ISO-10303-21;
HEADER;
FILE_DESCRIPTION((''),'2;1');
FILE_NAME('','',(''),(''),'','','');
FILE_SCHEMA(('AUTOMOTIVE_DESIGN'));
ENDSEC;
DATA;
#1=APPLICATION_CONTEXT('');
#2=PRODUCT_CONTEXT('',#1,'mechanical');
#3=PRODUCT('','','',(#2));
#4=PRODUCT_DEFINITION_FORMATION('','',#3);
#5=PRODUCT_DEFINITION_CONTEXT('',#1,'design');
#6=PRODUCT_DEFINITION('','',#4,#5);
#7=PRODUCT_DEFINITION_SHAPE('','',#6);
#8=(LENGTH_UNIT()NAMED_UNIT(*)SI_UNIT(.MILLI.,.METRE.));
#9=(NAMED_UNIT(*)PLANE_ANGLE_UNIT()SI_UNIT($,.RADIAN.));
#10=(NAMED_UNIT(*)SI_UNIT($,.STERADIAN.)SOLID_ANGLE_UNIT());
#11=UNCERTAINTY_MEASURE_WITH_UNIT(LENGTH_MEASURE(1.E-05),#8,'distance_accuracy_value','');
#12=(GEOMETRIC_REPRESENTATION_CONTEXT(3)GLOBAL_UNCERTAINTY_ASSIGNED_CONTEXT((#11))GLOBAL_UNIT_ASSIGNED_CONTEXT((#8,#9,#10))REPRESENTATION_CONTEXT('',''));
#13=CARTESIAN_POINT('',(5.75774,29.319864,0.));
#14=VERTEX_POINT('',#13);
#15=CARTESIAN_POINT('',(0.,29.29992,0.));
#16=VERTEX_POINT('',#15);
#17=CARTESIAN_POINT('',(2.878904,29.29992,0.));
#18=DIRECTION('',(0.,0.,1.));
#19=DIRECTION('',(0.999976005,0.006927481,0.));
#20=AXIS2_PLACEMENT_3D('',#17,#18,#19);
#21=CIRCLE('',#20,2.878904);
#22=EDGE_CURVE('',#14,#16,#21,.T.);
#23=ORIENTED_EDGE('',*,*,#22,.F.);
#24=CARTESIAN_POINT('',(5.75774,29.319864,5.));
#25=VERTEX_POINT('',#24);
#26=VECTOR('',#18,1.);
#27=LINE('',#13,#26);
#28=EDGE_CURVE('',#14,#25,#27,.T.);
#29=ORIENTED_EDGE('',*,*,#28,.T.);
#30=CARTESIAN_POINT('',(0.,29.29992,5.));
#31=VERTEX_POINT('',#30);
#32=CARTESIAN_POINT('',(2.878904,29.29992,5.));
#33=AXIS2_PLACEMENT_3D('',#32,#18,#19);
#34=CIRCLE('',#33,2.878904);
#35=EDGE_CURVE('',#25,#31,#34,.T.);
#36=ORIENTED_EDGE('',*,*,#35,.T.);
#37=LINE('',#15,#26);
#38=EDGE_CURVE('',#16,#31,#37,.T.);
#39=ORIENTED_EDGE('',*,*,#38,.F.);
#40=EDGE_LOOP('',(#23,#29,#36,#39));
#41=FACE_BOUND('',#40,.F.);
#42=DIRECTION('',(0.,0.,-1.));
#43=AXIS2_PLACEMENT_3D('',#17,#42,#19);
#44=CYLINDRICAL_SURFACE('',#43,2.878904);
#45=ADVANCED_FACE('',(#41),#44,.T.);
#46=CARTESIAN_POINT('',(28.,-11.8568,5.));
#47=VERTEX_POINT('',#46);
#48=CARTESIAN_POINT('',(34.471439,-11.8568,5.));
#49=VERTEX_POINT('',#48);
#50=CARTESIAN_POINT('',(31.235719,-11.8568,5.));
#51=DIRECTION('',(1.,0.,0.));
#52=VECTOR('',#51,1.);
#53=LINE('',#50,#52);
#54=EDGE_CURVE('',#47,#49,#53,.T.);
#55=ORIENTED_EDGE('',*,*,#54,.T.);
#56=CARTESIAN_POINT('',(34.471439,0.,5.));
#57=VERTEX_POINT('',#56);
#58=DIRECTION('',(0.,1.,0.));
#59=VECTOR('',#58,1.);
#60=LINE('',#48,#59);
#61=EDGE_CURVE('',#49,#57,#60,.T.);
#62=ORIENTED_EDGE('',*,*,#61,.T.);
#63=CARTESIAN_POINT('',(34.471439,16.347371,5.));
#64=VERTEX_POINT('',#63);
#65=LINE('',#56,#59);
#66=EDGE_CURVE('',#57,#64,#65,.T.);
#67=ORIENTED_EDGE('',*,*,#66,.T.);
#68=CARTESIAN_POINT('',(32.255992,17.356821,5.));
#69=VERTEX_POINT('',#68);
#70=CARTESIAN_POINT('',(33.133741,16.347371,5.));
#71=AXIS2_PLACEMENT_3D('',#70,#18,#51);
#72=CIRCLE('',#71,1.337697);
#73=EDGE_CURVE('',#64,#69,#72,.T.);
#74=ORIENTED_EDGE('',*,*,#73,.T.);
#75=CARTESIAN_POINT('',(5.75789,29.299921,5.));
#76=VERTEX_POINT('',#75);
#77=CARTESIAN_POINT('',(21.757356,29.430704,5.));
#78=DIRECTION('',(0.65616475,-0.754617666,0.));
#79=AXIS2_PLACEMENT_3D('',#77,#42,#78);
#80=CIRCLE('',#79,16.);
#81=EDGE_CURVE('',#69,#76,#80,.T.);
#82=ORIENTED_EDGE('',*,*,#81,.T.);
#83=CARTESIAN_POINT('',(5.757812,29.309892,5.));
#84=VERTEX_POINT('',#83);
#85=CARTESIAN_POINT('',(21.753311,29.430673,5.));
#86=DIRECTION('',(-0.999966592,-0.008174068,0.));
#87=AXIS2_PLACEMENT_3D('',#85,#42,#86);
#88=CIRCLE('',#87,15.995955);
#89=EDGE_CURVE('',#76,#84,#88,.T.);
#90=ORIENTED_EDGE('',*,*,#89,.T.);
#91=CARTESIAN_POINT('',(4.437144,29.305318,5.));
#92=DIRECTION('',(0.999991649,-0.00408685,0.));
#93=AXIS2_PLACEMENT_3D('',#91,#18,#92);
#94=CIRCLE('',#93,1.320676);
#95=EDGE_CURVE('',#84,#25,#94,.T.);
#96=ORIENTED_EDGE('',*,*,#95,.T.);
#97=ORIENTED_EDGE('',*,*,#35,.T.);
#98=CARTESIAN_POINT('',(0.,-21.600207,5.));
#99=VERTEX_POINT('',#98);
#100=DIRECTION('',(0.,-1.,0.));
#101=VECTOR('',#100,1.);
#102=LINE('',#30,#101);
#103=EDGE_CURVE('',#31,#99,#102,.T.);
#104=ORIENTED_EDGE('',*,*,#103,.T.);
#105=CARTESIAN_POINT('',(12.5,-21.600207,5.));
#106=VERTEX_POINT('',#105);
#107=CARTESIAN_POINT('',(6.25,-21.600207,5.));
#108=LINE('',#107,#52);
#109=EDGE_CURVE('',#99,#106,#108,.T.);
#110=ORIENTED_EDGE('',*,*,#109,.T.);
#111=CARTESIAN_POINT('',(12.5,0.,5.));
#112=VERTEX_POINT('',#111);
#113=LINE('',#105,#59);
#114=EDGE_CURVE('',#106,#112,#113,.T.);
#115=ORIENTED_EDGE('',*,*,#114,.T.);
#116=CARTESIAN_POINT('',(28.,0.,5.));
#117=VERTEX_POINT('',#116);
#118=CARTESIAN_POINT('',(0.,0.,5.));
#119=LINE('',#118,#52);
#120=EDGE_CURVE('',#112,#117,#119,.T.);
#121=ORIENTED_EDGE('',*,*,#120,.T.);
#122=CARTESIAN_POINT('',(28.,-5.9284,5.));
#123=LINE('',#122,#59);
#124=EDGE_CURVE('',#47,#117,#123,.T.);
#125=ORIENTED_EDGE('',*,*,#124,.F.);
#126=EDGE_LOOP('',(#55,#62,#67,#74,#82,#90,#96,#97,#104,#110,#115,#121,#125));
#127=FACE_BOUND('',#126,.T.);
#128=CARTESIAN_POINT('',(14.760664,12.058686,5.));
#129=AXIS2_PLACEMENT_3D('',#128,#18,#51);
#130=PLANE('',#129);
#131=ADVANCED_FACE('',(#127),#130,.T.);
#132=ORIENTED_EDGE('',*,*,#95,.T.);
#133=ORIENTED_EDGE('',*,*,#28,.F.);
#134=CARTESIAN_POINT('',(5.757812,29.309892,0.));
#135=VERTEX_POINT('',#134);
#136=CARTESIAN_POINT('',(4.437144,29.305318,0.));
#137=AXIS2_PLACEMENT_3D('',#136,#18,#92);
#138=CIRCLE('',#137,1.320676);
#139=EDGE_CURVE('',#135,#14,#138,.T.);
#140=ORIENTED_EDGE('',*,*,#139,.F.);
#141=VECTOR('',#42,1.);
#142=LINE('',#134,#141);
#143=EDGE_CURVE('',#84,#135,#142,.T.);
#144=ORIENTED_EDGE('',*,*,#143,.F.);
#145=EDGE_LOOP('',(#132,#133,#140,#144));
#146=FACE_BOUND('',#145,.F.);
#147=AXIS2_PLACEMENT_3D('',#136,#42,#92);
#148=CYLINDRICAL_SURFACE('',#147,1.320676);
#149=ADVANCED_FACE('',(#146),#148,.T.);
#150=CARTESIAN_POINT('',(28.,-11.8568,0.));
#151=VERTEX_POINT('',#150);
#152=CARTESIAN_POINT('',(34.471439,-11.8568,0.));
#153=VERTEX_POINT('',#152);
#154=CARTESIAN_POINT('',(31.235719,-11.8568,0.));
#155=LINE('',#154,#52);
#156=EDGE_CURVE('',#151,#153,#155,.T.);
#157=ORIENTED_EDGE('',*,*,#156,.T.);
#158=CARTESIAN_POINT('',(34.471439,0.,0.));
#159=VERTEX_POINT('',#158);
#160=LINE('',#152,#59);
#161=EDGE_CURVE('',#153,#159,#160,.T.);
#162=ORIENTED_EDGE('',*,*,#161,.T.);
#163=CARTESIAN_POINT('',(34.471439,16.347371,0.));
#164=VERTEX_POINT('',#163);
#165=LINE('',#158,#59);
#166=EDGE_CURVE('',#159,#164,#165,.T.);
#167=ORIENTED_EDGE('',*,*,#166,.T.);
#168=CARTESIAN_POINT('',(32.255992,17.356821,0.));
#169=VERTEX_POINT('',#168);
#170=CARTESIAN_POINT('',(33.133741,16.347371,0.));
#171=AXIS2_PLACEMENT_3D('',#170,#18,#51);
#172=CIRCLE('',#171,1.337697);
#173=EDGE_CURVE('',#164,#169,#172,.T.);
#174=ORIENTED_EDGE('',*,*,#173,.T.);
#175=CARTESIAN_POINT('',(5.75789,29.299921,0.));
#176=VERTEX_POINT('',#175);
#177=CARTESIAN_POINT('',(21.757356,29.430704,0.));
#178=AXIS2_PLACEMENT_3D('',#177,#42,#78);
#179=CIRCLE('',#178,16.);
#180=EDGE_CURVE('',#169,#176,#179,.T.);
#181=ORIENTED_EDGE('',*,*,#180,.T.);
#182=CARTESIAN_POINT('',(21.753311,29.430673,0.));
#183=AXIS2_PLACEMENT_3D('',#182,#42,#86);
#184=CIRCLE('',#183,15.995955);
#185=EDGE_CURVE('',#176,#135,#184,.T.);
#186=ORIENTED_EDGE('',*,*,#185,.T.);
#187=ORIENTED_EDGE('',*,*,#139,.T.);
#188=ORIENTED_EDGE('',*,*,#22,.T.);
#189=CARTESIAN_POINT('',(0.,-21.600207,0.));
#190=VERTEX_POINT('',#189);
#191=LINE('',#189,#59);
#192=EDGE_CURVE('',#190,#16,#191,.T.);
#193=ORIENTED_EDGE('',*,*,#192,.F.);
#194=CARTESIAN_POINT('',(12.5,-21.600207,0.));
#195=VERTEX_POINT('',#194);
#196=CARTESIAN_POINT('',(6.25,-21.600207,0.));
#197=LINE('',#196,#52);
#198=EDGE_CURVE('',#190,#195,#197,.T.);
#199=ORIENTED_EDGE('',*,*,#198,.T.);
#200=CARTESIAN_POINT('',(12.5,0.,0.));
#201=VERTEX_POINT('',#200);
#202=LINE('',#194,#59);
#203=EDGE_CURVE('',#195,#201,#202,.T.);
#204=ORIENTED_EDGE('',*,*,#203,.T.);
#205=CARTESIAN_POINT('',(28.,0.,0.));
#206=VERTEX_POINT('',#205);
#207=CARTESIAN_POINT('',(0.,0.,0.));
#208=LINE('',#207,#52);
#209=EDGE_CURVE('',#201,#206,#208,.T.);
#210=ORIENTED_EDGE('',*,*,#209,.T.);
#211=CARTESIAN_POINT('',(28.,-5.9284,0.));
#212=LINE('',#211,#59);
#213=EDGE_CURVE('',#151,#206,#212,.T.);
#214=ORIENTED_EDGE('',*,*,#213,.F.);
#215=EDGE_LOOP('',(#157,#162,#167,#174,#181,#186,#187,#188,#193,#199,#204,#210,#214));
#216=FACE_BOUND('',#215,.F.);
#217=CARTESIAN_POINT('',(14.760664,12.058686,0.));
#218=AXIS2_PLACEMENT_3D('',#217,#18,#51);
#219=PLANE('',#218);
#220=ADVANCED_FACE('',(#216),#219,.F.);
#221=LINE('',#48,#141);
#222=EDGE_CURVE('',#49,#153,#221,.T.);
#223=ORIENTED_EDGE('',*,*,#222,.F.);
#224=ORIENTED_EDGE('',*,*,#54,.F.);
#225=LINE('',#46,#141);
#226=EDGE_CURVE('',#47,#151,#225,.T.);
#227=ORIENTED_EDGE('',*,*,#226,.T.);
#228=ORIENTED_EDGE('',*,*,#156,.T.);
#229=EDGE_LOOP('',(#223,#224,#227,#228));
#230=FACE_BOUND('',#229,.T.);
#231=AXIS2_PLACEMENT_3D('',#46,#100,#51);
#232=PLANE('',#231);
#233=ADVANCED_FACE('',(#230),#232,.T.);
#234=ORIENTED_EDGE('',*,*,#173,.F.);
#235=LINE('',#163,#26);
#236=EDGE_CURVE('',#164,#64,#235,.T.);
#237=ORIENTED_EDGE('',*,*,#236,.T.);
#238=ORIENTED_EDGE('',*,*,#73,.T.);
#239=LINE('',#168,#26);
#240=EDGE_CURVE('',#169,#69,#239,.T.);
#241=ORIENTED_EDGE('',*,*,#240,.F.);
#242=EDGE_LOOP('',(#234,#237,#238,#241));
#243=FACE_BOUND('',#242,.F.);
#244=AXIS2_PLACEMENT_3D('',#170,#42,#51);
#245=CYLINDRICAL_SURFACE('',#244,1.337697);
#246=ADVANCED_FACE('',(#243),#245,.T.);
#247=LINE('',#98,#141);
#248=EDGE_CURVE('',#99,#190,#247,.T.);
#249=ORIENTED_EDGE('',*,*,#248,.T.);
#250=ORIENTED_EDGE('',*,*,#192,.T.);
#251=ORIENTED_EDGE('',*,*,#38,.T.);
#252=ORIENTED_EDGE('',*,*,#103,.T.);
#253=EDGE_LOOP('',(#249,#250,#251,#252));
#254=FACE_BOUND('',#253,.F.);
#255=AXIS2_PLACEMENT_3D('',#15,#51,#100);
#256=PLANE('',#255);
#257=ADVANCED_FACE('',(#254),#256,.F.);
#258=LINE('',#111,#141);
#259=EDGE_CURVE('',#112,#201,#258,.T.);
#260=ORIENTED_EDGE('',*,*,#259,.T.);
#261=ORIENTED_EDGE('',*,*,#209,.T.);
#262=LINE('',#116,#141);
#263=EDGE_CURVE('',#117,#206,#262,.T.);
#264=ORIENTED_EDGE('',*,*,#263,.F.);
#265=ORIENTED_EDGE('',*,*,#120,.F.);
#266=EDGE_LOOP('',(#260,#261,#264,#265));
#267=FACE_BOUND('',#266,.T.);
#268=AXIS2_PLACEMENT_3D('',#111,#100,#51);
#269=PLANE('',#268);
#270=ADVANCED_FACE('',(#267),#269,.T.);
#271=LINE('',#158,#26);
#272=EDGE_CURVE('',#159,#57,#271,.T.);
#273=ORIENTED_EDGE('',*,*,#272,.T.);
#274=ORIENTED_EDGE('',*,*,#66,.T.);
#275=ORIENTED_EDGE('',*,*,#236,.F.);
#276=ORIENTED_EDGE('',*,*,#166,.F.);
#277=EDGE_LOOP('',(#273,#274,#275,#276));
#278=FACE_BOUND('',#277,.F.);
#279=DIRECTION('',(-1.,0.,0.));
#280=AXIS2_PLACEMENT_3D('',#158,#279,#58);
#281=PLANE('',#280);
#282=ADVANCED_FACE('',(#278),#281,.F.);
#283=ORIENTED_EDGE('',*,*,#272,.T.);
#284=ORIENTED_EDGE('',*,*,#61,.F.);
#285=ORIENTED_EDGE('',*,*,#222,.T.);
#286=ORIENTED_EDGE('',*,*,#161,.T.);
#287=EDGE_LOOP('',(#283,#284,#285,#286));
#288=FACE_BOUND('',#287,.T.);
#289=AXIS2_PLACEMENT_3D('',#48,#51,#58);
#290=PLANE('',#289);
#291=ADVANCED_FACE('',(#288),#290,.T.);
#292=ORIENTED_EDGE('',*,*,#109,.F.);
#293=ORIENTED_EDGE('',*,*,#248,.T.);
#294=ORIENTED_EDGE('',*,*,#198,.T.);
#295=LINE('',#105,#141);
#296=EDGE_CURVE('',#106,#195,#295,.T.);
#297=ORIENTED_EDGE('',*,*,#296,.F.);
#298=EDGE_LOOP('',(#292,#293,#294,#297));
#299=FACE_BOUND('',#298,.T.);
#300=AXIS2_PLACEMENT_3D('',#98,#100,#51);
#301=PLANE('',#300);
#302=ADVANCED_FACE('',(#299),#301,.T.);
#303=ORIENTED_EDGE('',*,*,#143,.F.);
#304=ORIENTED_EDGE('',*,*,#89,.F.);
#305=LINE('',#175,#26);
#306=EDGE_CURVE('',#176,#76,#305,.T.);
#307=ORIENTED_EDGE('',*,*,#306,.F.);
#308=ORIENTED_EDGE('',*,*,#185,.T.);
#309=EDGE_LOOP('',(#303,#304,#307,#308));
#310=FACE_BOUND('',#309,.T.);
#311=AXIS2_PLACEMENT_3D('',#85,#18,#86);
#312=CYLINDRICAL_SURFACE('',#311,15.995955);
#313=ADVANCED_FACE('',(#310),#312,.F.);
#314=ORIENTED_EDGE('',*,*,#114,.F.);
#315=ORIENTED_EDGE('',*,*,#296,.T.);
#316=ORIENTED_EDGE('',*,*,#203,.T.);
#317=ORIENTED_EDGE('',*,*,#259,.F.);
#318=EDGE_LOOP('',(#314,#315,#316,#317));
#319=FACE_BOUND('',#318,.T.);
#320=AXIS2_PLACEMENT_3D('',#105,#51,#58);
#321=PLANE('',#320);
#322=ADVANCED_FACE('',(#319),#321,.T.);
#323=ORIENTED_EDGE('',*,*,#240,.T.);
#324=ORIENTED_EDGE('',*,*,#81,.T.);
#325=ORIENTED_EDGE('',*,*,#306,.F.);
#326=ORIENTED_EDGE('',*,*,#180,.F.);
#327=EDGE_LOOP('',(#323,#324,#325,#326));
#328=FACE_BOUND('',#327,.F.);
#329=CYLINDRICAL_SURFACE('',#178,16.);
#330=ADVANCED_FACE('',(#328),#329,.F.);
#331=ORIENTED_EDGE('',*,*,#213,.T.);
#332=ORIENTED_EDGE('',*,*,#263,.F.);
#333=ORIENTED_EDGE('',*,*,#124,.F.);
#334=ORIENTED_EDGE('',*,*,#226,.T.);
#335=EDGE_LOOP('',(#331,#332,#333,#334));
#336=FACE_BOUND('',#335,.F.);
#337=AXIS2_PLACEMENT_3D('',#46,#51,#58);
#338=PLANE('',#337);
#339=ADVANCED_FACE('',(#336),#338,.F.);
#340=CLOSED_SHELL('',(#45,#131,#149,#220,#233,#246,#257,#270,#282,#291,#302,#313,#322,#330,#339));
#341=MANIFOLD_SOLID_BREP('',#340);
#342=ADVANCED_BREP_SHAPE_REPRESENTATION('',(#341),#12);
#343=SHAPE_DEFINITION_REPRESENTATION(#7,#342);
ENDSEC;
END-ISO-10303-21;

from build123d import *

# Parameters (mm, degrees)
F1_DEPTH = 5
F2_W     = 6.4714387385
F2_H     = 11.8567999452
F2_W_2   = 12.5
F2_H_2   = 9.7434073687
F3_DEPTH = 5


# Not quite as in the source:
# - ends of sketch curves that miss each other by under 0.0002 mm in the source are joined
# - a feature names something its author has since deleted; it is built from what else it names


with BuildPart() as f1:
    # F0 (on Top) → F1 (new body)
    with BuildSketch(Plane.XY):
        with BuildLine():
            Line((0, 29.2999204248), (0, 0))
            Line((0, 0), (34.4714387385, 0))
            Line((34.4714387385, 0), (34.4714387385, 16.3473710418))
            ThreePointArc((34.4714387385, 16.3473710418), (32.5790927131, 15.1300794804), (32.2559916738, 17.3568210333))
            ThreePointArc((32.2559916738, 17.3568210333), (15.182844974, 14.8438668457), (5.7578901922, 29.2999210911))
            ThreePointArc((5.7578901922, 29.2999210911), (2.8789043427, 26.4210160822), (0, 29.2999204248))
        make_face()
        with BuildLine():
            ThreePointArc((5.7577396052, 29.3198639813), (2.8689325046, 32.1788074974), (0, 29.2999204248))
            ThreePointArc((0, 29.2999204248), (2.8789043427, 26.4210160822), (5.7578086853, 29.2999204248))
            ThreePointArc((5.7578086853, 29.2999204248), (5.7578117914, 29.3098925127), (5.7577396052, 29.3198639813))
        make_face()
        with BuildLine():
            ThreePointArc((32.2559916738, 17.3568210333), (32.5790927131, 15.1300794804), (34.4714387385, 16.3473710418))
            ThreePointArc((34.4714387385, 16.3473710418), (33.6883902233, 17.5646626032), (32.2559916738, 17.3568210333))
        make_face()
    extrude(amount=F1_DEPTH)

    # F2 (on face) → F3 (join)
    with BuildSketch(Plane.XY.offset(5)):
        with BuildLine():
            Line((28, 0), (34.4714387385, 0))
            Line((34.4714387385, 0), (34.4714387385, 16.3473710418))
            ThreePointArc((34.4714387385, 16.3473710418), (33.6883902233, 17.5646626032), (32.2559916738, 17.3568210333))
            ThreePointArc((32.2559916738, 17.3568210333), (15.182844974, 14.8438668457), (5.7578901922, 29.2999210911))
            ThreePointArc((5.7578901922, 29.2999210911), (5.757811792, 29.3098923335), (5.7577396052, 29.3198639813))
            ThreePointArc((5.7577396052, 29.3198639813), (2.8689325046, 32.1788074974), (0, 29.2999204248))
            Line((0, 29.2999204248), (0, 25.3991372883))
            Line((0, 25.3991372883), (0, 0))
            Line((0, 0), (12.5, 0))
            Line((12.5, 0), (28, 0))
        make_face()
        with Locations((31.2357193692, -5.9283999726)):
            Rectangle(F2_W, F2_H)
        with Locations((6.25, -5.9283999726)):
            Rectangle(F2_W_2, F2_H)
        with Locations((6.25, -16.7285036296)):
            Rectangle(F2_W_2, F2_H_2)
        with Locations((6.25, -5.9283999726)):
            Rectangle(F2_W_2, F2_H)
    extrude(amount=-F3_DEPTH)


solid = f1.part
